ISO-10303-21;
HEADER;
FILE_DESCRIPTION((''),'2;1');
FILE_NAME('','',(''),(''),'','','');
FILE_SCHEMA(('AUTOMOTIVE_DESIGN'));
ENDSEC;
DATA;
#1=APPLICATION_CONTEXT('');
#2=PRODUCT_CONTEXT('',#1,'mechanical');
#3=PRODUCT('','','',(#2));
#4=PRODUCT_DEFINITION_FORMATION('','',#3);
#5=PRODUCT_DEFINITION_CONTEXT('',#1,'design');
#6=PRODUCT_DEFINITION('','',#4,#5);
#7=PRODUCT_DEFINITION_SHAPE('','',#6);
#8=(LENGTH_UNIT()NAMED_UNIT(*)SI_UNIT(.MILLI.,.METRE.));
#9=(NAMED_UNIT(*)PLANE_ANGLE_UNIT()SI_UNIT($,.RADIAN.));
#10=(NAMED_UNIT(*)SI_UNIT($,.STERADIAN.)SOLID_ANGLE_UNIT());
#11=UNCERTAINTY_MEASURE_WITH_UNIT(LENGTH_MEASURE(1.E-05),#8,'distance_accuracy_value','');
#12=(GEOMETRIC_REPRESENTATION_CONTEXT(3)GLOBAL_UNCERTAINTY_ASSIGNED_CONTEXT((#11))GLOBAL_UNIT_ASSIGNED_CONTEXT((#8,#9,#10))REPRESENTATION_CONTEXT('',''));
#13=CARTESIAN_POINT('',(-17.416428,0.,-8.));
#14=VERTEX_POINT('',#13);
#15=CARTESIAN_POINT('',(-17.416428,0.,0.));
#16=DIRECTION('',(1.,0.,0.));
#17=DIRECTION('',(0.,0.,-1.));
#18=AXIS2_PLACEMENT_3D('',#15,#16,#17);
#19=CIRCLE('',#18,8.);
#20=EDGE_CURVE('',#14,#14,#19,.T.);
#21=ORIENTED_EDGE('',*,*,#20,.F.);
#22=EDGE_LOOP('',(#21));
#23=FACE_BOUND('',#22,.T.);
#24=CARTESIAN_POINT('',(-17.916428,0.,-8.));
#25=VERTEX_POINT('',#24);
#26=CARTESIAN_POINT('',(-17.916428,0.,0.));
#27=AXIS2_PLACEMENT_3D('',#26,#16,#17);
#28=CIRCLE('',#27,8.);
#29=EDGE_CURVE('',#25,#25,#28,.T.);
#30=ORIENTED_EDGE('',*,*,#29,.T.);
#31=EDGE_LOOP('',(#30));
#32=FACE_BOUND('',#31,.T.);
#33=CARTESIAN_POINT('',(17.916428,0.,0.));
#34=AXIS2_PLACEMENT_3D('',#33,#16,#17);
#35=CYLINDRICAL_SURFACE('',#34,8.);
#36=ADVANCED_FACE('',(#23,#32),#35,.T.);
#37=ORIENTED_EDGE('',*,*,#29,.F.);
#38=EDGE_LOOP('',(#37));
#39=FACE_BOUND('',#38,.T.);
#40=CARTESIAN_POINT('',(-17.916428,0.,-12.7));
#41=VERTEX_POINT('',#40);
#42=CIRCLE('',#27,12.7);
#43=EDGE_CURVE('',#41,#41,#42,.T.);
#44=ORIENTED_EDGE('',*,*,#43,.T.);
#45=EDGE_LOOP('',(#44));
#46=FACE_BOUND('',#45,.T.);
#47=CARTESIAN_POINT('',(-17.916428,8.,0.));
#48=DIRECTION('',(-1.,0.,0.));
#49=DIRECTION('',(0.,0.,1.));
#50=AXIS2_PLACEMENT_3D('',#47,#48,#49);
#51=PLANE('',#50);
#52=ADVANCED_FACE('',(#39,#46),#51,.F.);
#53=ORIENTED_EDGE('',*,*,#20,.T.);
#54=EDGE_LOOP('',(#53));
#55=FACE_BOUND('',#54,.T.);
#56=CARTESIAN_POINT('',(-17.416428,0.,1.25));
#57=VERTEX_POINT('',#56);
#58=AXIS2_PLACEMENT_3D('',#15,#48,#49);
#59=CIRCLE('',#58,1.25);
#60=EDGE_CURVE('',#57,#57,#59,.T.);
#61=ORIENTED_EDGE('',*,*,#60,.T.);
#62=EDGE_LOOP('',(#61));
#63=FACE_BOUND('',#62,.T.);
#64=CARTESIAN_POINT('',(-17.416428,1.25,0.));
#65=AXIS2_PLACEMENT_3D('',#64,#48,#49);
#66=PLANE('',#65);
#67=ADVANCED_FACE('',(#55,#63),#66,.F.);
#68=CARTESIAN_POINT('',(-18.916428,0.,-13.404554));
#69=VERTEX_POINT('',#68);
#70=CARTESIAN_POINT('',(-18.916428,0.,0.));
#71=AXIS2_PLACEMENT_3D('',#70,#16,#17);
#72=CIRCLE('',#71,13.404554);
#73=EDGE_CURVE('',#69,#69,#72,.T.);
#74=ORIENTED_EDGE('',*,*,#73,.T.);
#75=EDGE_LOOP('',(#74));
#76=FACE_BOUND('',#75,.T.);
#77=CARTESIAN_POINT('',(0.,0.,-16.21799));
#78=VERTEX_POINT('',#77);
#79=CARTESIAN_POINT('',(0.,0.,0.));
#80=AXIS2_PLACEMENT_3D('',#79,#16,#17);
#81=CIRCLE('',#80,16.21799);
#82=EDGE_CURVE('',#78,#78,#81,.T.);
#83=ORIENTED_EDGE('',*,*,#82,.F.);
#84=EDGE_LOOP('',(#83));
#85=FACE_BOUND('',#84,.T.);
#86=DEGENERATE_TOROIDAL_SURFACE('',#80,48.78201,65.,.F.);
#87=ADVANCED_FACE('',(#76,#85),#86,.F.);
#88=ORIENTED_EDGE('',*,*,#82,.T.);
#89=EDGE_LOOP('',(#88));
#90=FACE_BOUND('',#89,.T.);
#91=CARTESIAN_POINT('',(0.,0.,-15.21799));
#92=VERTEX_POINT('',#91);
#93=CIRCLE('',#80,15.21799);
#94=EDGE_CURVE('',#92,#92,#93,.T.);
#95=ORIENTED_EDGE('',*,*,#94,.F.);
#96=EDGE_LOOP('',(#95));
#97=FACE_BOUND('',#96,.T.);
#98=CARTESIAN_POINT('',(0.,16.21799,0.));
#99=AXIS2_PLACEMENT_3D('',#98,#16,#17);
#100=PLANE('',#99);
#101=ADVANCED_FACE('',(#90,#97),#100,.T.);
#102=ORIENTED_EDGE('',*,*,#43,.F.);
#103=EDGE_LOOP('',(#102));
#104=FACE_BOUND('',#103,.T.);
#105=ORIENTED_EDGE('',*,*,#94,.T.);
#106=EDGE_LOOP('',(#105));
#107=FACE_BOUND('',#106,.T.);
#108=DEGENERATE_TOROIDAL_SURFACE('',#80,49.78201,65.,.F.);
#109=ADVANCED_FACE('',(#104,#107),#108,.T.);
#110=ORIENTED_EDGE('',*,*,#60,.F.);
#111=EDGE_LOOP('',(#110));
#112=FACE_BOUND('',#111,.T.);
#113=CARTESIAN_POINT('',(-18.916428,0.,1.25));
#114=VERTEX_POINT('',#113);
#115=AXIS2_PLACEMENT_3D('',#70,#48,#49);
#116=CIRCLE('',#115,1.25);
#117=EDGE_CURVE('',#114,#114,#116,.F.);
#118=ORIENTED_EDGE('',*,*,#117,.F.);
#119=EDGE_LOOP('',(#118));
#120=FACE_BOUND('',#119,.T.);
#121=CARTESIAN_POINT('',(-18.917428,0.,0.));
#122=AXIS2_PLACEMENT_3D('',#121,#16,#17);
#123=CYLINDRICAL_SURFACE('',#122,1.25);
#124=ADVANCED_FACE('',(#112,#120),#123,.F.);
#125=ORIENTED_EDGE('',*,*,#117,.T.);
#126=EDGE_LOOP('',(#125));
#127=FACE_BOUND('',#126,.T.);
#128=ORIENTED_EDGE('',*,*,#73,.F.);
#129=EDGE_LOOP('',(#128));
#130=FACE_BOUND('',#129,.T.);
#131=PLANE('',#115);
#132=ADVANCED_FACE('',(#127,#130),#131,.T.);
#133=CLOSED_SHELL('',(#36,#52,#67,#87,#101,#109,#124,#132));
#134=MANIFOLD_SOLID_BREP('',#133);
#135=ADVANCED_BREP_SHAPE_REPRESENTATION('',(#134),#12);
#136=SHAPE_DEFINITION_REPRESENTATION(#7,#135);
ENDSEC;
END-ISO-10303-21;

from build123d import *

# Parameters (mm, degrees)
CUT_EXTRUDE1_REACH = 31.73
SKETCH2_R          = 1.25


# Read off the part's stored shape, not the designer's step: Roller coating 12, Roller core 12 coated
with BuildPart() as part:
    # Roller coating 12 outline → Roller coating 12 (revolve)
    with BuildSketch(Plane.YX):
        with BuildLine():
            ThreePointArc((12.7, -17.916428128), (15.217989764, 0), (12.7, 17.916428128))
            Line((12.7, 17.916428128), (8, 17.916428128))
            Line((8, 17.916428128), (8, 17.416428128))
            Line((8, 17.416428128), (12.322080058, 17.416428128))
            ThreePointArc((12.322080058, 17.416428128), (14.717989764, 0), (12.322080058, -17.416428128))
            Line((12.322080058, -17.416428128), (8, -17.416428128))
            Line((8, -17.416428128), (8, -17.916428128))
            Line((8, -17.916428128), (12.7, -17.916428128))
        make_face()
    revolve(axis=Axis((0, 0, 0), (1, 0, 0)))


with BuildPart() as body_2:
    # Roller core 12 coated outline → Roller core 12 coated (revolve)
    with BuildSketch(Plane.YX):
        with BuildLine():
            Line((1.25, 17.416428128), (1.25, -17.416428128))
            Line((1.25, -17.416428128), (12.322080058, -17.416428128))
            ThreePointArc((12.322080058, -17.416428128), (14.717989764, 0), (12.322080058, 17.416428128))
            Line((12.322080058, 17.416428128), (1.25, 17.416428128))
        make_face()
    revolve(axis=Axis((0, 0, 0), (1, 0, 0)))


with BuildPart() as body_3:
    # Sketch1 → Revolve1 (revolve)
    with BuildSketch(Plane.XY, mode=Mode.PRIVATE) as revolve1_sk:
        with BuildLine():
            Line((0, 0), (-17.916428128, 0))
            Line((-17.916428128, 0), (-18.916428128, 0))
            Line((-18.916428128, 0), (-18.916428128, 13.404553802))
            ThreePointArc((-18.916428128, 13.404553802), (-9.562252285, 15.510783538), (0, 16.217989764))
            Line((0, 16.217989764), (0, 15.217989764))
            Line((0, 15.217989764), (0, 0))
        make_face()
    revolve(revolve1_sk.sketch.rotate(Axis((0, 0, 0), (-1, 0, 0)), 90), axis=Axis((0, 0, 0), (-1, 0, 0)))

    # Combine1: cut body 2
    add(body_2.part, mode=Mode.SUBTRACT)

    # Combine2: cut part
    add(part.part, mode=Mode.SUBTRACT)

    # Sketch2 → Cut-Extrude1 (cut, up to next)
    with BuildSketch(Plane(origin=(0, 0, 0), x_dir=(0, 0, -1), z_dir=(1, 0, 0)), mode=Mode.PRIVATE) as cut_extrude1_sk1:
        with Locations(Location((0, 0, 0), (0, 0, 180))):
            Circle(SKETCH2_R)
    cut_extrude1_tool1 = extrude(cut_extrude1_sk1.sketch, amount=-CUT_EXTRUDE1_REACH, mode=Mode.PRIVATE) & body_3.part
    add(cut_extrude1_tool1.solids().sort_by_distance((0, 0, 0))[0], mode=Mode.SUBTRACT)


solid = body_3.part
